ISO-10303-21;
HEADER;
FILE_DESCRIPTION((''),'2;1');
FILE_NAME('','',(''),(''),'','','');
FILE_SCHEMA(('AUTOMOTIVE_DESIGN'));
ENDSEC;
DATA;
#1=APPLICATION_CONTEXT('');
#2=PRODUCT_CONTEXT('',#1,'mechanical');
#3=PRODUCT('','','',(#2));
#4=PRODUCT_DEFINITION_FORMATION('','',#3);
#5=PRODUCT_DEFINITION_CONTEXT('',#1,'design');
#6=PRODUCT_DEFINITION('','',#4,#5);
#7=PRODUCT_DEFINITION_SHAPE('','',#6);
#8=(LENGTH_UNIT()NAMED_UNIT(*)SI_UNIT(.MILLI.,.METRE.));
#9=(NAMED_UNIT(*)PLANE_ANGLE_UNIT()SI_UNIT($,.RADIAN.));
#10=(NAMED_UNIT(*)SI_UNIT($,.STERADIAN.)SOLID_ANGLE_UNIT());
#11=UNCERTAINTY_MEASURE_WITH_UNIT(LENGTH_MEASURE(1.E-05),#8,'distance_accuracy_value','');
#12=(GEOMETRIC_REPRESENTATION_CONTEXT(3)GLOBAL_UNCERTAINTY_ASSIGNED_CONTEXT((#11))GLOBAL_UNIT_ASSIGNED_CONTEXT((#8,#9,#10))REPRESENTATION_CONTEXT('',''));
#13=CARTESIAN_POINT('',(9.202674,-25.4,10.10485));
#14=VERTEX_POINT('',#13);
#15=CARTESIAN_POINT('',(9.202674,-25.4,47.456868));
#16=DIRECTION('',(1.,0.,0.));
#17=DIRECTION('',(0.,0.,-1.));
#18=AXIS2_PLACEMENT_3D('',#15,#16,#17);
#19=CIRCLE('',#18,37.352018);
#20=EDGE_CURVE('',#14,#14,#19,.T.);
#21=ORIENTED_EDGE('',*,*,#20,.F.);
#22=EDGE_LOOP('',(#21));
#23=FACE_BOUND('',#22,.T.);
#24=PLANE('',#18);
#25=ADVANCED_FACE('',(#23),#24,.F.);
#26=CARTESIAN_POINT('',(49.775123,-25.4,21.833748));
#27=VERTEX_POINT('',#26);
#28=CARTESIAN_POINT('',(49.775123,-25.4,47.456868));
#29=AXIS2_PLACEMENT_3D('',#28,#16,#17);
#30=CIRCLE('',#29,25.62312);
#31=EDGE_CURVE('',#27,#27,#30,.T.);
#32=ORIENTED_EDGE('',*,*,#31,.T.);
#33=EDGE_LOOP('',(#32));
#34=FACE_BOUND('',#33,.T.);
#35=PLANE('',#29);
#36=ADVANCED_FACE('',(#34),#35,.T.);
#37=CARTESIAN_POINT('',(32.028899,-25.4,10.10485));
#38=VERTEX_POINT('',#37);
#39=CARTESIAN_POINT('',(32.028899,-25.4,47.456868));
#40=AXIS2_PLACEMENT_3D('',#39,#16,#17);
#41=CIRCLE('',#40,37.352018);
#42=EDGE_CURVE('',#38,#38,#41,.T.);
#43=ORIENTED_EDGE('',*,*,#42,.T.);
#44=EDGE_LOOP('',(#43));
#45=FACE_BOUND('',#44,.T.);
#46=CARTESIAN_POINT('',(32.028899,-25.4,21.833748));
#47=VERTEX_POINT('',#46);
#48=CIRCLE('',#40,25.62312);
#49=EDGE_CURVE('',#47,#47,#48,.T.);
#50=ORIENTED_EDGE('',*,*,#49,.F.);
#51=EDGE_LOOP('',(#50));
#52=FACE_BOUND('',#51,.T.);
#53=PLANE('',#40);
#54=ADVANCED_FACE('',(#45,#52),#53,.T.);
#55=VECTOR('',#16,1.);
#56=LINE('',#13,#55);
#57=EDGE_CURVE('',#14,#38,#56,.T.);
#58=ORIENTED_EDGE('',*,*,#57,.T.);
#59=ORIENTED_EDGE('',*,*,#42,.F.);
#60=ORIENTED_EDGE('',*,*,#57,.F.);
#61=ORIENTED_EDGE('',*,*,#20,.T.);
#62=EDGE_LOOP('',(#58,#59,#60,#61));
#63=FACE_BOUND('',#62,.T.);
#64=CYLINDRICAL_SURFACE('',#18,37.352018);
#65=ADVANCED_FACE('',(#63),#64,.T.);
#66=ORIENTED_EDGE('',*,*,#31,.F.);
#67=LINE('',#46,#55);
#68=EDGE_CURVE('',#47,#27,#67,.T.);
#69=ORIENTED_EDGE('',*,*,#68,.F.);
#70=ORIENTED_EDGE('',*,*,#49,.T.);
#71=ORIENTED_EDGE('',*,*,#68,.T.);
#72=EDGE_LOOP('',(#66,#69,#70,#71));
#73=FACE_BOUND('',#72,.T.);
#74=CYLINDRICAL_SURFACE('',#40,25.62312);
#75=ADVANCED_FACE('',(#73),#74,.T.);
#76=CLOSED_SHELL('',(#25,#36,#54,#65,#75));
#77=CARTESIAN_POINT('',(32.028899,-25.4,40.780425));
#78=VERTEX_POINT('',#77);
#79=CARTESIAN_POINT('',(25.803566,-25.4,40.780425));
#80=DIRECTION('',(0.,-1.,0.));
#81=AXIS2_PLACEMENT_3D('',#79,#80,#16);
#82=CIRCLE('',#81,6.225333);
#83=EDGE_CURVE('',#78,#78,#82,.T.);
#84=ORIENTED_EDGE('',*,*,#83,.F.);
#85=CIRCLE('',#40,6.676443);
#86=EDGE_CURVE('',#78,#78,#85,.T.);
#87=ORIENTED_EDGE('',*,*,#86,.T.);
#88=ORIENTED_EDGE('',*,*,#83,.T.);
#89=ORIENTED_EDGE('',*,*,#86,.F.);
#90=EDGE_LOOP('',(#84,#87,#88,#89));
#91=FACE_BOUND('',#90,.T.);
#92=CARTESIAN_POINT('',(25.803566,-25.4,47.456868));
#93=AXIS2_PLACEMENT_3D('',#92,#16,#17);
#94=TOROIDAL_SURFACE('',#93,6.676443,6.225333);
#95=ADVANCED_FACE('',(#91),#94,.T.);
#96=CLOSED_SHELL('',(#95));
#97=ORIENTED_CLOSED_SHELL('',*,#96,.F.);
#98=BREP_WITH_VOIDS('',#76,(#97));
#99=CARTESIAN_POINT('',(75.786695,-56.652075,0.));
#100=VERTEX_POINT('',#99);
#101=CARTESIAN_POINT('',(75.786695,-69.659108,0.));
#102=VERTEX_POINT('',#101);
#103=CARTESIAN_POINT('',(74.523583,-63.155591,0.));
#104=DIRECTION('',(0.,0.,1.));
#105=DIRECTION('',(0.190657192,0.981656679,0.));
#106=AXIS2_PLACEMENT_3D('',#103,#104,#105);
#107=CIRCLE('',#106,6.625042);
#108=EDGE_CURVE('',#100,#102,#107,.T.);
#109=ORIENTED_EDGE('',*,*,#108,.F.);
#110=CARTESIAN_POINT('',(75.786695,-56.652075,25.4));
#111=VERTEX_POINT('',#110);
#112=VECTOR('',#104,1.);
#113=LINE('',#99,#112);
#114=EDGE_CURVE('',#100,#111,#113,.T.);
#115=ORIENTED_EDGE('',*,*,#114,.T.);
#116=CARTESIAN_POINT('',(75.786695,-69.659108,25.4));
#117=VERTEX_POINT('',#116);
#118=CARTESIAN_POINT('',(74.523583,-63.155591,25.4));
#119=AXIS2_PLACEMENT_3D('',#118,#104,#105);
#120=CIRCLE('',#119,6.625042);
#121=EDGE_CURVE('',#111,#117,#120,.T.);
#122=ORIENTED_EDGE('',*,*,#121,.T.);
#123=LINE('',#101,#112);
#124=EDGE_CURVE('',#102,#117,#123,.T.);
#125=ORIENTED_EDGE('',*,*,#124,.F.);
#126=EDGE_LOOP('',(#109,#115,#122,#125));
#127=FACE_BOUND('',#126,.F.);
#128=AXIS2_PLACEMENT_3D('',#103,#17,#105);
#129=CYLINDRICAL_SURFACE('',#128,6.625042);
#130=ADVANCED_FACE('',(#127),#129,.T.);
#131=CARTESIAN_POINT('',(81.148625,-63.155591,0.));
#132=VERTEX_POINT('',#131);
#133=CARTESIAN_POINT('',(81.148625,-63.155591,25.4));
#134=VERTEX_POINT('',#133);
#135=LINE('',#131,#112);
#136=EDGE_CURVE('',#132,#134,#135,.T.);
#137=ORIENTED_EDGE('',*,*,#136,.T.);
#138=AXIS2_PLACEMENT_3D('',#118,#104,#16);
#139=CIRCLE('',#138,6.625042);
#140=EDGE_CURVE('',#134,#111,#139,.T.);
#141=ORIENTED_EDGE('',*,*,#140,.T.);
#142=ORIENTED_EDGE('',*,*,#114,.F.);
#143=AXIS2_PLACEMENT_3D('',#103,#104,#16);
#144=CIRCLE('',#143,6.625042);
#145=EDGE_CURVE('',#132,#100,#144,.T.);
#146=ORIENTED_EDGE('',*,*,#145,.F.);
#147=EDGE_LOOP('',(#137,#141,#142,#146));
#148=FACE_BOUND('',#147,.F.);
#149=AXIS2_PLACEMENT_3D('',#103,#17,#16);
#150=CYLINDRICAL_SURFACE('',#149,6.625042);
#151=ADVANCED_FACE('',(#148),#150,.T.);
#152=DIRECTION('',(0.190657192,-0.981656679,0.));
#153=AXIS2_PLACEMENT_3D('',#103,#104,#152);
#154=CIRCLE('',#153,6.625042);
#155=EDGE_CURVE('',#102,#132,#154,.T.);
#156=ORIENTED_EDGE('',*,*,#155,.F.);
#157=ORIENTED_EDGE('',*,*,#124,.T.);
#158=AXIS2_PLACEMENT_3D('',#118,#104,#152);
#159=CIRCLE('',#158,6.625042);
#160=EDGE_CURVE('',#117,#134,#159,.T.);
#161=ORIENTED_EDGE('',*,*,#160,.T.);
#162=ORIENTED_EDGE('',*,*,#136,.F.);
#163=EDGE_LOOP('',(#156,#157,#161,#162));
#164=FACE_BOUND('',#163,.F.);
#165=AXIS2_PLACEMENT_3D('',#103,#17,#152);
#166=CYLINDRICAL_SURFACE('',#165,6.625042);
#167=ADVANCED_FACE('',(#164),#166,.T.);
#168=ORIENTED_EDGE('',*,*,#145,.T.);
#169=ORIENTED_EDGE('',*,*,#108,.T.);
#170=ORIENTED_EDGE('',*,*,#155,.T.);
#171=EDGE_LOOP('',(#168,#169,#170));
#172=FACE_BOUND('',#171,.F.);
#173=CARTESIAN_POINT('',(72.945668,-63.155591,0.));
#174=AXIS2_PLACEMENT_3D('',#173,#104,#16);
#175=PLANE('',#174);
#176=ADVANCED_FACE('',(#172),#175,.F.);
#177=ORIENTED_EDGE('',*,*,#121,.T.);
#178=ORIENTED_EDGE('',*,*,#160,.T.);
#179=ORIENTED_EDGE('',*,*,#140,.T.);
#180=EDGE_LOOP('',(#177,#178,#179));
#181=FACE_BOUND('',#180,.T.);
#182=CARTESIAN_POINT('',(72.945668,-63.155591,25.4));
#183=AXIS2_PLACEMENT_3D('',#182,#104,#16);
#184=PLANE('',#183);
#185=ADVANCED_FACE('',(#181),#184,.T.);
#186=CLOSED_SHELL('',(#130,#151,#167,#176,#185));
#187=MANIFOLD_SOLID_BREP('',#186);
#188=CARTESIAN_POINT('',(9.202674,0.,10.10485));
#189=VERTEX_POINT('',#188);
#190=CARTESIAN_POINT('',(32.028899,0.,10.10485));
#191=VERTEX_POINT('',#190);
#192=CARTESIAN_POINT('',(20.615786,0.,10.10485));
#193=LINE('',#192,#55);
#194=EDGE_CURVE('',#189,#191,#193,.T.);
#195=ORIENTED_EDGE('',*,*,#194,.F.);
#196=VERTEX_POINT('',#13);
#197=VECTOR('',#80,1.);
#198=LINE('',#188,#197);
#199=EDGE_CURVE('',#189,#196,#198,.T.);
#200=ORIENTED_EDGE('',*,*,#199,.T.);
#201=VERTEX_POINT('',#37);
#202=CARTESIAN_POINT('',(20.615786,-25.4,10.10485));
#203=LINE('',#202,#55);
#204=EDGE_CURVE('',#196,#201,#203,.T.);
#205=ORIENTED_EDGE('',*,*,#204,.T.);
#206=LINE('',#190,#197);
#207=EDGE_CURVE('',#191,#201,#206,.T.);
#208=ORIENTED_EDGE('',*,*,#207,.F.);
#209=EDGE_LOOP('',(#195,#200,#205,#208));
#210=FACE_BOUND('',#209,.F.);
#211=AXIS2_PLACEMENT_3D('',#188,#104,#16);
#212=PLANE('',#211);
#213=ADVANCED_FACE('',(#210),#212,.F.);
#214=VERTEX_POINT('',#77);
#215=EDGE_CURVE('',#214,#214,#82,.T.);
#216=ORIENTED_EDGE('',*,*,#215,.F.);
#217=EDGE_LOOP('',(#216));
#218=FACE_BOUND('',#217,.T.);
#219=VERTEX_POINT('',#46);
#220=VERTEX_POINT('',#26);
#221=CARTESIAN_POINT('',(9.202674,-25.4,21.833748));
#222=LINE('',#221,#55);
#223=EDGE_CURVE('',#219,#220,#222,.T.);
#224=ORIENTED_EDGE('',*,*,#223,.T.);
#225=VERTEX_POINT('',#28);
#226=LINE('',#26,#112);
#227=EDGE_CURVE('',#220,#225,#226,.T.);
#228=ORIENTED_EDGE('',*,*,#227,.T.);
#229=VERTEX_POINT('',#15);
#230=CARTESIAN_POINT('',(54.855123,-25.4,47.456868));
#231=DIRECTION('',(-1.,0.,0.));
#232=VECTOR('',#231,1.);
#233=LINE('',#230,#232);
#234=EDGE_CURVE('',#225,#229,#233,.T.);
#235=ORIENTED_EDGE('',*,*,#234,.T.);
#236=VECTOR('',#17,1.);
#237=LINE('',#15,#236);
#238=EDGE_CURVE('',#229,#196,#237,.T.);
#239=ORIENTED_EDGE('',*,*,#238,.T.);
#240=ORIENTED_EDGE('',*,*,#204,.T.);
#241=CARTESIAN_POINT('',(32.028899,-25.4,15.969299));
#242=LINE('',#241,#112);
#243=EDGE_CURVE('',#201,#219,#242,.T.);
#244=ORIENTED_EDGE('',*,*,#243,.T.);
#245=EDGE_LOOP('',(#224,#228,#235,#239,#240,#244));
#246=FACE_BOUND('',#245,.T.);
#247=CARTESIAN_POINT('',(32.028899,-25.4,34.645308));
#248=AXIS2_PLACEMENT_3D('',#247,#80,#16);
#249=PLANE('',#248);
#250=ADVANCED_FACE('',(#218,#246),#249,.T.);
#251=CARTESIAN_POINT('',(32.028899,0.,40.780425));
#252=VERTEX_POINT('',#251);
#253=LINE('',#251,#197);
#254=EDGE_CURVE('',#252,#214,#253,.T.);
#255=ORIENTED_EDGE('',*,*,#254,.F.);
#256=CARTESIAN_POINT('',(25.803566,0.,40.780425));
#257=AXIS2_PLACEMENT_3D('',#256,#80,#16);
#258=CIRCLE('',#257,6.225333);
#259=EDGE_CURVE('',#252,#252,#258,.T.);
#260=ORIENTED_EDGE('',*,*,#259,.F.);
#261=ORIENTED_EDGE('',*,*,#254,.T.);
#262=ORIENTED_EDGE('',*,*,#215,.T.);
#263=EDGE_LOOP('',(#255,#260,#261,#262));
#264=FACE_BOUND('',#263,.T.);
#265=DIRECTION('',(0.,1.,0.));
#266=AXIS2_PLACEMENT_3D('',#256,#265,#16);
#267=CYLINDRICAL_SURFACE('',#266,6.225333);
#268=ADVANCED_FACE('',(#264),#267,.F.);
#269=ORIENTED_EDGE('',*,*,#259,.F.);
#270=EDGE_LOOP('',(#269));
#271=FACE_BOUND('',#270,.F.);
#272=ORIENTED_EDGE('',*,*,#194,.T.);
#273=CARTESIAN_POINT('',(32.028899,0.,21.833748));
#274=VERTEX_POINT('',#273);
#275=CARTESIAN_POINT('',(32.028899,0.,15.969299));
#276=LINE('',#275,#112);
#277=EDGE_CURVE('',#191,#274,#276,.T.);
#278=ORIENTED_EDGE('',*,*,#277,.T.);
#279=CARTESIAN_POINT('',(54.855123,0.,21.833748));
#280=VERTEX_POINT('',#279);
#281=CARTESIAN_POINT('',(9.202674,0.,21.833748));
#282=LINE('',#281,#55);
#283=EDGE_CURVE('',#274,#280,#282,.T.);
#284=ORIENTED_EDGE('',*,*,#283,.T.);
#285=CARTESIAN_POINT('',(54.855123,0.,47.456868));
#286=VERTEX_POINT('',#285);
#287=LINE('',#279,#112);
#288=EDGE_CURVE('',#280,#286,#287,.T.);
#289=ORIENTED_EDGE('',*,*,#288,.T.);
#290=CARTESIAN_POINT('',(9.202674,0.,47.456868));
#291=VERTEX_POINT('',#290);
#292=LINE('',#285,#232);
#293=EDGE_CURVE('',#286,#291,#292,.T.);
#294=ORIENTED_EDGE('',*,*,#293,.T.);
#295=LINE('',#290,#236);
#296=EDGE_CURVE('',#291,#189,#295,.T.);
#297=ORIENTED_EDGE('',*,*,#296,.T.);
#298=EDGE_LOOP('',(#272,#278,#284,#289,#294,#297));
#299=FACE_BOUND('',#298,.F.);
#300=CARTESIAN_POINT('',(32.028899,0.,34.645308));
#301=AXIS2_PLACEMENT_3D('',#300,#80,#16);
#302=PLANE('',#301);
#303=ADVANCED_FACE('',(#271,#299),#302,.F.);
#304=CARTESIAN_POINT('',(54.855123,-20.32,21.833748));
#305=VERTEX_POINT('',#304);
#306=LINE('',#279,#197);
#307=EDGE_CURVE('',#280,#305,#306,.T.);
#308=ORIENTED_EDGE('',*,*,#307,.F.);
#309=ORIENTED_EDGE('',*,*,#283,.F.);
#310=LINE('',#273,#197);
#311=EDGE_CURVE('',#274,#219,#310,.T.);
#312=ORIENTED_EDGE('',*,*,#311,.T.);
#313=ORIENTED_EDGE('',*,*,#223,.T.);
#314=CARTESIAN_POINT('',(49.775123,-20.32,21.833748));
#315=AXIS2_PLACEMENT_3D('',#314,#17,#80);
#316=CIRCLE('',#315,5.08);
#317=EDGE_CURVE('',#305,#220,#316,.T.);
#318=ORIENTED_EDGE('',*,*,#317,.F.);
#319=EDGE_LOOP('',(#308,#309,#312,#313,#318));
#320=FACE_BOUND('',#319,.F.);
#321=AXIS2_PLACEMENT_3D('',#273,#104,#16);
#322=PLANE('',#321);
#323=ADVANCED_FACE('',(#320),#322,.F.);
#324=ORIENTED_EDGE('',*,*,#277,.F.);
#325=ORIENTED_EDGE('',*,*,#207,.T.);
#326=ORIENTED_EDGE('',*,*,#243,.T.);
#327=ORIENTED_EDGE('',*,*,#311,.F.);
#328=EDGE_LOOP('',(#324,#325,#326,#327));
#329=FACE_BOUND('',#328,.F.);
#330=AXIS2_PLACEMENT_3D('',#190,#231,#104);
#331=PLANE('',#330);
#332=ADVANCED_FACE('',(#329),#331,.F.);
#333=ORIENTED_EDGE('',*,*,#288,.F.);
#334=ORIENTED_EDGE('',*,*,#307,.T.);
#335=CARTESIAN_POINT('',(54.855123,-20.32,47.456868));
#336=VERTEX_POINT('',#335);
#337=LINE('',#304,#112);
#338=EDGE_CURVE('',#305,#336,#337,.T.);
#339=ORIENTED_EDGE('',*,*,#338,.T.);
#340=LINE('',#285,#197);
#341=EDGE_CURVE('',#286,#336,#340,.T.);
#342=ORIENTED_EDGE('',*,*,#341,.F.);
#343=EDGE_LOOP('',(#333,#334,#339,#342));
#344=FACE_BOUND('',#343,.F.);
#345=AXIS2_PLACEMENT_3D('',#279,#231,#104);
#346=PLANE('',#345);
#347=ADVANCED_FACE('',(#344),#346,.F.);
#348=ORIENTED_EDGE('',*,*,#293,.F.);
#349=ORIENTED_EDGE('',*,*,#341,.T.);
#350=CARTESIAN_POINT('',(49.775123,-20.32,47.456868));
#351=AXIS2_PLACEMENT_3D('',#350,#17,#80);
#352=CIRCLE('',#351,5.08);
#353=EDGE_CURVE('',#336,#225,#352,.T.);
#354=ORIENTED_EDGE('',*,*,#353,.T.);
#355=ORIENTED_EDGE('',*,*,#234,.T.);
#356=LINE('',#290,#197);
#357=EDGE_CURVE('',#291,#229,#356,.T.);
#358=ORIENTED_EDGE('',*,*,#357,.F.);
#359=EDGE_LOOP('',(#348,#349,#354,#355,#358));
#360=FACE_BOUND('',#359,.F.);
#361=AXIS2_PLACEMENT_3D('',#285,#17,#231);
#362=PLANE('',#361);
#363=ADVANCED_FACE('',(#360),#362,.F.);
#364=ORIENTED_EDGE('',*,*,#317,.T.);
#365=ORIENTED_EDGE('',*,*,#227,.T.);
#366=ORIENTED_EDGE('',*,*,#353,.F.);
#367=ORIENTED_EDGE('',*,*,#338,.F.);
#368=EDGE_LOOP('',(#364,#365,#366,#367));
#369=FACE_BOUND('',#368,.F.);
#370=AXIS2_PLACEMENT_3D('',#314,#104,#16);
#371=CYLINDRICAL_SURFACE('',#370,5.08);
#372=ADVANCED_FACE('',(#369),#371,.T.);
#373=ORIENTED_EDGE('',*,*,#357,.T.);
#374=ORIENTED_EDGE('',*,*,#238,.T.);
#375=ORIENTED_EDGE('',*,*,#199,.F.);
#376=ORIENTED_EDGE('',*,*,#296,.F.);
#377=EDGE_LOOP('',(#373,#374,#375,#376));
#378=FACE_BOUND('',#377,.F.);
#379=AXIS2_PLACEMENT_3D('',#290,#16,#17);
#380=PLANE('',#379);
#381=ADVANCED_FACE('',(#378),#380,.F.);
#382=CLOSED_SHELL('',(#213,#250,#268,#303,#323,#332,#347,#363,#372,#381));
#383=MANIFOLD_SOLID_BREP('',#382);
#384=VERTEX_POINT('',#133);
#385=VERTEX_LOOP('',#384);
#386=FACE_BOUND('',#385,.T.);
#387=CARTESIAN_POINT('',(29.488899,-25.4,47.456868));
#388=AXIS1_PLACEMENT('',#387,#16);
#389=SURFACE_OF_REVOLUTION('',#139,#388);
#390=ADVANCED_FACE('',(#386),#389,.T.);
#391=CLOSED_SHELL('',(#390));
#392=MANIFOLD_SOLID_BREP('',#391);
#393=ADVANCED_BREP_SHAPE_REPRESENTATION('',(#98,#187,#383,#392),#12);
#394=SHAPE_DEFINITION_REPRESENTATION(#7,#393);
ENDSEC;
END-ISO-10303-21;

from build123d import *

# Parameters (mm, degrees)
F0_R      = 6.2253326178
F0_W      = 22.8262245655
F0_H      = 11.7288976908
F1_DEPTH  = 25.4
F3_R      = 5.08
F4_DEPTH  = 25.4
F4_FACE_R = 6.625041603
F1_FACE_R = 6.2253326178


with BuildPart() as f1:
    # F0 (on Front) → F1 (new body)
    with BuildSketch(Plane.XZ):
        Polygon((9.2026740313, 47.4568679929), (9.2026740313, 21.8337476254), (32.0288985968, 21.8337476254), (54.8551231623, 21.8337476254), (54.8551231623, 47.4568679929), align=None)
        with Locations((25.803565979, 40.7804250717)):
            Circle(F0_R, mode=Mode.SUBTRACT)
        with Locations((20.615786314, 15.96929878)):
            Rectangle(F0_W, F0_H)
    extrude(amount=F1_DEPTH)

    # F3
    f3_edges = [f1.edges().sort_by_distance(p)[0] for p in [
        (54.855123, -25.4, 34.645308),
    ]]
    fillet(f3_edges, radius=F3_R)


with BuildPart() as f4:
    # F2 (on Top) → F4 (new body)
    with BuildSketch(Plane.XY):
        with BuildLine():
            ThreePointArc((75.7866948843, -56.6520751508), (67.8985414516, -63.1555914879), (75.7866948843, -69.659107825))
            Line((75.7866948843, -69.659107825), (75.7866948843, -56.6520751508))
        make_face()
        with BuildLine():
            Line((75.7866948843, -56.6520751508), (75.7866948843, -69.659107825))
            ThreePointArc((75.7866948843, -69.659107825), (79.6353021716, -67.3700314163), (81.1486246575, -63.1555914879))
            ThreePointArc((81.1486246575, -63.1555914879), (79.6353021716, -58.9411515595), (75.7866948843, -56.6520751508))
        make_face()
    extrude(amount=F4_DEPTH)


with BuildPart() as f5:
    # F4_face (on face) + F1_face (on face) → F5 (revolve)
    with BuildSketch(Plane(origin=(74.5235830545, -63.1555914879, 25.4), x_dir=(1, 0, 0), z_dir=(0, 0, 1))):
        Circle(F4_FACE_R)
    with BuildSketch(Plane(origin=(27.8636251422, -25.4, 29.7978212865), x_dir=(1, 0, 0), z_dir=(0, -1, 0))):
        Polygon((4.1652734545, -7.9640736611), (21.91149802, -7.9640736611), (21.91149802, 17.6590467064), (-18.660951111, 17.6590467064), (-18.660951111, -19.6929713519), (4.1652734545, -19.6929713519), align=None)
        with Locations((-2.0600591632, 10.9826037853)):
            Circle(F1_FACE_R, mode=Mode.SUBTRACT)
    revolve(axis=Axis((29.4888985968, -25.4, 47.4568679929), (1, 0, 0)))


solid = Compound([f1.part, f4.part, f5.part])
